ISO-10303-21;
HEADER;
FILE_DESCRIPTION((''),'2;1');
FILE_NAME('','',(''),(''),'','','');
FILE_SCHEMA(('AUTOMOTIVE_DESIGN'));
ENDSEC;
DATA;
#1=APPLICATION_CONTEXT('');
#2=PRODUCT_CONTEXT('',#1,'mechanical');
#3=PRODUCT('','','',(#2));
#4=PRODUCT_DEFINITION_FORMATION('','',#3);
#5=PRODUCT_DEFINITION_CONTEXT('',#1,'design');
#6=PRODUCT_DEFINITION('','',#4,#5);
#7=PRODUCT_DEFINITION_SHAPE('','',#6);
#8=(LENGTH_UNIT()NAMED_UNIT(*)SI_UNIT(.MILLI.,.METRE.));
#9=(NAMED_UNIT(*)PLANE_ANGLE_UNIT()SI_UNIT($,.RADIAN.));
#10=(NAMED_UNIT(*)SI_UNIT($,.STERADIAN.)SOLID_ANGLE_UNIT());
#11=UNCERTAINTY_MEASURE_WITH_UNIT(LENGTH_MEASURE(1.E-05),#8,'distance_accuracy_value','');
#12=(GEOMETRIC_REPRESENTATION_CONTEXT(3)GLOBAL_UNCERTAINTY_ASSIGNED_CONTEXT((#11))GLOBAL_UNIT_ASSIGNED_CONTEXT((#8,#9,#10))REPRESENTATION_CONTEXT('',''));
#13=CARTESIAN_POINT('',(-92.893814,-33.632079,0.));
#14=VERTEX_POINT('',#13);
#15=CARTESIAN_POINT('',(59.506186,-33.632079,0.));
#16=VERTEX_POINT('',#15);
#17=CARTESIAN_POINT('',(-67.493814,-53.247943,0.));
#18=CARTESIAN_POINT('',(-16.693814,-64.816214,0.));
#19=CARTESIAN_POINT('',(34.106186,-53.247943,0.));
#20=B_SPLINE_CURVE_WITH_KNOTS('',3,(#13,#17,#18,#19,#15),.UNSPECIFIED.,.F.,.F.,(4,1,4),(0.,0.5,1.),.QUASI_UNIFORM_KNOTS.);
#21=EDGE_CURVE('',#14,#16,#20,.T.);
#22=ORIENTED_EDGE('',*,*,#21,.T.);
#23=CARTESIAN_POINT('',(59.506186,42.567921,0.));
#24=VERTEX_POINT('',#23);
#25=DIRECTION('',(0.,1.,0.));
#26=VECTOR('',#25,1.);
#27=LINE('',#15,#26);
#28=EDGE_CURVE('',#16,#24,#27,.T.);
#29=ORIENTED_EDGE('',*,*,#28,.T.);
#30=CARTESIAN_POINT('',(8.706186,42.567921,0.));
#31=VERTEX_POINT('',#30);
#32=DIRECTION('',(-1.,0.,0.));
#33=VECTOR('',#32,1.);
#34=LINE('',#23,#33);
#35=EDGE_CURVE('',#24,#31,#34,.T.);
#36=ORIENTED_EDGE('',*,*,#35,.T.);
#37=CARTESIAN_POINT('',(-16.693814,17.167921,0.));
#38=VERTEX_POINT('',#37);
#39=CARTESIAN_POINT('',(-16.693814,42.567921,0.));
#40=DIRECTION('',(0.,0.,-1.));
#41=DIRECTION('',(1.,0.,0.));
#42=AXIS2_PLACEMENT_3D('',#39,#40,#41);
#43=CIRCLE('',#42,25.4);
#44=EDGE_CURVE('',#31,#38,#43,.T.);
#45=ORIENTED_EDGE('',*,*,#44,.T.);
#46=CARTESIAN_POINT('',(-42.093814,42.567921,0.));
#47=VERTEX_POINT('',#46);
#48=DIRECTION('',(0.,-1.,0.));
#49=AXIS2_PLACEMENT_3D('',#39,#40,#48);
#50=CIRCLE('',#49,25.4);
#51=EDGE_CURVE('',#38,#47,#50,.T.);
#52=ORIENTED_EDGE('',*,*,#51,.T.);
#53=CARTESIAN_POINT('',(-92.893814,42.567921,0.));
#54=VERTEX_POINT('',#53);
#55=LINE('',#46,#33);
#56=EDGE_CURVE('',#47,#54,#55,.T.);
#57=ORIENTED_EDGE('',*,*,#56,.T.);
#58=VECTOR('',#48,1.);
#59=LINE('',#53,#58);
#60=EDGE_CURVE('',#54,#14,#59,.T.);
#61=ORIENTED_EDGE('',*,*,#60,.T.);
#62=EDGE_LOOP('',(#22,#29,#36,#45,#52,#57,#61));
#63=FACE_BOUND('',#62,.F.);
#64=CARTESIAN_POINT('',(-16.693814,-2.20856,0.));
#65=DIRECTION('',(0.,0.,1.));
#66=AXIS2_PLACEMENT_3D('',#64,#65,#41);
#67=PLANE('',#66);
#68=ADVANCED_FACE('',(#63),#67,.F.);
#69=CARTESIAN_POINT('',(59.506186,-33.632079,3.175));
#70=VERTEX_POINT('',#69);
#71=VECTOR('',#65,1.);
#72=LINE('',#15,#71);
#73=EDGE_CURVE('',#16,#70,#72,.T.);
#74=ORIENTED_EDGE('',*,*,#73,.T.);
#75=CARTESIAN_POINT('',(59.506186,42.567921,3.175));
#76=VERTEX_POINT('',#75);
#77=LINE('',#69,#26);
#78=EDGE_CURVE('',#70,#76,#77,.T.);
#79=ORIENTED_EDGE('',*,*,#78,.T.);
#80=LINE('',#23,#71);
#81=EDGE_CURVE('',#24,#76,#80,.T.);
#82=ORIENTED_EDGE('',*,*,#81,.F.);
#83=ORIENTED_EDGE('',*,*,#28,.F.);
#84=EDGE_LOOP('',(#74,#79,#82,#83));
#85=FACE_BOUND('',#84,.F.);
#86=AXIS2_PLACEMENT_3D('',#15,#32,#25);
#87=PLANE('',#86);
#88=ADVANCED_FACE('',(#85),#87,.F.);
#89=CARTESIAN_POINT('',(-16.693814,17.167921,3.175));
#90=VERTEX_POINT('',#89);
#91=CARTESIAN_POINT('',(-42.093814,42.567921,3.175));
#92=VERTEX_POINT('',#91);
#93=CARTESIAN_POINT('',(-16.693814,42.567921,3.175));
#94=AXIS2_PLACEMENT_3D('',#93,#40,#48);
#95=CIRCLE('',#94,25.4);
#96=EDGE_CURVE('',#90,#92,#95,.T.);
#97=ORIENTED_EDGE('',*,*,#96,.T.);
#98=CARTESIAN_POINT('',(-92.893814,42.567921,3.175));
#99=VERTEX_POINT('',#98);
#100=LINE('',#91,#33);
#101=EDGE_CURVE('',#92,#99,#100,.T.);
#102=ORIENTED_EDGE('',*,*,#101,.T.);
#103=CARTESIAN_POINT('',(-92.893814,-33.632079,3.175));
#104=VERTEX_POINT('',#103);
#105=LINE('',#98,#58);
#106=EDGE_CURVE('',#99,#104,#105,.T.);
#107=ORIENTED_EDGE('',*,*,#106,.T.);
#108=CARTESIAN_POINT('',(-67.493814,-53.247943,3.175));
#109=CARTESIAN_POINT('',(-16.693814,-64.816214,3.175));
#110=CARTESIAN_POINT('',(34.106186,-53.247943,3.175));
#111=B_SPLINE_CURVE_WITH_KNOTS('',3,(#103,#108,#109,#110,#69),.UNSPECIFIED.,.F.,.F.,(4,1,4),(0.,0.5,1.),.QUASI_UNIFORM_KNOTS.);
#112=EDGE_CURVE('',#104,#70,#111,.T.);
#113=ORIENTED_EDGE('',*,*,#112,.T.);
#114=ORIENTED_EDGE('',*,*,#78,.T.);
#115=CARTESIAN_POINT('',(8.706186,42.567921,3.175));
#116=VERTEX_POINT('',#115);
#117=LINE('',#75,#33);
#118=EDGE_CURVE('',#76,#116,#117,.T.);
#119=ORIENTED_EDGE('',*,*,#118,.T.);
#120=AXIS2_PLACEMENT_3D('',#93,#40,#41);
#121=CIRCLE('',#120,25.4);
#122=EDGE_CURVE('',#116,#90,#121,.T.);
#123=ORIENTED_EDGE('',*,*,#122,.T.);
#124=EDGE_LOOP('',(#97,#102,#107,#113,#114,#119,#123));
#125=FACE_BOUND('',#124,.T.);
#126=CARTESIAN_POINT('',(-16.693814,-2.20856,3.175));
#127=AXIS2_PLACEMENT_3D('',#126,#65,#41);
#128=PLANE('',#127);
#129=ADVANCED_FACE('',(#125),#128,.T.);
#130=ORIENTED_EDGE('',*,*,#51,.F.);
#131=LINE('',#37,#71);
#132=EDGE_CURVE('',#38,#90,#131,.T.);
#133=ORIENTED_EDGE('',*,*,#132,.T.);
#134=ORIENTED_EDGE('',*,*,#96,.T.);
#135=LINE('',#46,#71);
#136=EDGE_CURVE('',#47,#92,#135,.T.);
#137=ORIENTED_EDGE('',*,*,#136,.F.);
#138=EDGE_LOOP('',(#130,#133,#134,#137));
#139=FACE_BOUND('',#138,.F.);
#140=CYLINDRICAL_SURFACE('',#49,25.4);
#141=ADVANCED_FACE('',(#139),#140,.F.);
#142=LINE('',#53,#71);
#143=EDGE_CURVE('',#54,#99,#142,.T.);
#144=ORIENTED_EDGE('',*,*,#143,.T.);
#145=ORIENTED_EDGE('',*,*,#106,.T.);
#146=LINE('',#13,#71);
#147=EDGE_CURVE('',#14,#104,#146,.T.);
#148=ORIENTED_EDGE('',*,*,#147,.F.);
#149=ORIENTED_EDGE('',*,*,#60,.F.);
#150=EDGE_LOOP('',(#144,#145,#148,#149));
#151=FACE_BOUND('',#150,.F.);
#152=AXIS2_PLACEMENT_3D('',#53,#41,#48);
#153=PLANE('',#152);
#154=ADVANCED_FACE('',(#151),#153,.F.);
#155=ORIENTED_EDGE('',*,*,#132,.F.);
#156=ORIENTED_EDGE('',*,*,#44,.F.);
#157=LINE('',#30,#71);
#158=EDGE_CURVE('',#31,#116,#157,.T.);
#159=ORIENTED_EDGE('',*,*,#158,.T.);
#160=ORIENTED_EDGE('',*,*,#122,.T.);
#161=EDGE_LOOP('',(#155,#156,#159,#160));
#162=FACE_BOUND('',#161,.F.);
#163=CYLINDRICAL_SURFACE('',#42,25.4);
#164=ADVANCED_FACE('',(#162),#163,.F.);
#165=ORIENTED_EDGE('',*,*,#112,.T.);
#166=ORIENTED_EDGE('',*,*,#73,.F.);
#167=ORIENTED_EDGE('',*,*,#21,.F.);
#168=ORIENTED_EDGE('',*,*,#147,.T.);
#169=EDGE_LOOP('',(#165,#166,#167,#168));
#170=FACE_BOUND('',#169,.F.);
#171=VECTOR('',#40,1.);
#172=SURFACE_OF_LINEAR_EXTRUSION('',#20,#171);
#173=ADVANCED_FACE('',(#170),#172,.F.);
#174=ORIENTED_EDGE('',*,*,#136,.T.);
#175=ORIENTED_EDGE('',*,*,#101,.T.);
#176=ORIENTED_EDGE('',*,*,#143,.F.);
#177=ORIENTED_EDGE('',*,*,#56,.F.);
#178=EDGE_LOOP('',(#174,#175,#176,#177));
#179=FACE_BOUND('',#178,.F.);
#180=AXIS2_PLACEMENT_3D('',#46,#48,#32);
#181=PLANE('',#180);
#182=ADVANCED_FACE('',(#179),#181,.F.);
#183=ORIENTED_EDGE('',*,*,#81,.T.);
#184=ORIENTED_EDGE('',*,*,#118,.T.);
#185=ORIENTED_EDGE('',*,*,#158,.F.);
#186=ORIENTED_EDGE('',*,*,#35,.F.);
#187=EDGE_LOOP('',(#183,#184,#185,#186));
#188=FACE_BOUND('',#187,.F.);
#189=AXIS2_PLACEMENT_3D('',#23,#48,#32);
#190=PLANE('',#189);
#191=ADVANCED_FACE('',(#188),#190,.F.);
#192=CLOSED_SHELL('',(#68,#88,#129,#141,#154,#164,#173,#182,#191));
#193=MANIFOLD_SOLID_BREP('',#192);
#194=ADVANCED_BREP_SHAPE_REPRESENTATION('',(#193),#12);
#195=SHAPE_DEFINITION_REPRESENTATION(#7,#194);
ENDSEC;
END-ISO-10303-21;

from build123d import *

# Parameters (mm, degrees)
F1_DEPTH = 3.175


# Not quite as in the source:
# - a length typed as a fraction of an inch, garbled in the dataset ("3 / 203.2 mm" for 3/8 in), is restored


with BuildPart() as f1:
    # F0 (on Top) → F1 (new body)
    with BuildSketch(Plane.XY):
        with BuildLine():
            Line((-67.493813857, 42.5679214677), (-92.893813857, 42.5679214677))
            Line((-92.893813857, 42.5679214677), (-92.893813857, -33.6320785323))
            add(Edge.make_bspline(
                [(-92.893813857, -33.6320785323), (-67.493813857, -53.2479426065), (-16.693813857, -64.816214458), (34.106186143, -53.2479426065), (59.506186143, -33.6320785323)],
                knots=[0, 0, 0, 0, 0.5, 1, 1, 1, 1], degree=3))
            Line((59.506186143, -33.6320785323), (59.506186143, 42.5679214677))
            Line((59.506186143, 42.5679214677), (34.106186143, 42.5679214677))
            Line((34.106186143, 42.5679214677), (8.706186143, 42.5679214677))
            ThreePointArc((8.706186143, 42.5679214677), (1.2666983851, 24.6074092256), (-16.693813857, 17.1679214677))
            ThreePointArc((-16.693813857, 17.1679214677), (-34.6543260992, 24.6074092256), (-42.093813857, 42.5679214677))
            Line((-42.093813857, 42.5679214677), (-67.493813857, 42.5679214677))
        make_face()
    extrude(amount=F1_DEPTH)


solid = f1.part
